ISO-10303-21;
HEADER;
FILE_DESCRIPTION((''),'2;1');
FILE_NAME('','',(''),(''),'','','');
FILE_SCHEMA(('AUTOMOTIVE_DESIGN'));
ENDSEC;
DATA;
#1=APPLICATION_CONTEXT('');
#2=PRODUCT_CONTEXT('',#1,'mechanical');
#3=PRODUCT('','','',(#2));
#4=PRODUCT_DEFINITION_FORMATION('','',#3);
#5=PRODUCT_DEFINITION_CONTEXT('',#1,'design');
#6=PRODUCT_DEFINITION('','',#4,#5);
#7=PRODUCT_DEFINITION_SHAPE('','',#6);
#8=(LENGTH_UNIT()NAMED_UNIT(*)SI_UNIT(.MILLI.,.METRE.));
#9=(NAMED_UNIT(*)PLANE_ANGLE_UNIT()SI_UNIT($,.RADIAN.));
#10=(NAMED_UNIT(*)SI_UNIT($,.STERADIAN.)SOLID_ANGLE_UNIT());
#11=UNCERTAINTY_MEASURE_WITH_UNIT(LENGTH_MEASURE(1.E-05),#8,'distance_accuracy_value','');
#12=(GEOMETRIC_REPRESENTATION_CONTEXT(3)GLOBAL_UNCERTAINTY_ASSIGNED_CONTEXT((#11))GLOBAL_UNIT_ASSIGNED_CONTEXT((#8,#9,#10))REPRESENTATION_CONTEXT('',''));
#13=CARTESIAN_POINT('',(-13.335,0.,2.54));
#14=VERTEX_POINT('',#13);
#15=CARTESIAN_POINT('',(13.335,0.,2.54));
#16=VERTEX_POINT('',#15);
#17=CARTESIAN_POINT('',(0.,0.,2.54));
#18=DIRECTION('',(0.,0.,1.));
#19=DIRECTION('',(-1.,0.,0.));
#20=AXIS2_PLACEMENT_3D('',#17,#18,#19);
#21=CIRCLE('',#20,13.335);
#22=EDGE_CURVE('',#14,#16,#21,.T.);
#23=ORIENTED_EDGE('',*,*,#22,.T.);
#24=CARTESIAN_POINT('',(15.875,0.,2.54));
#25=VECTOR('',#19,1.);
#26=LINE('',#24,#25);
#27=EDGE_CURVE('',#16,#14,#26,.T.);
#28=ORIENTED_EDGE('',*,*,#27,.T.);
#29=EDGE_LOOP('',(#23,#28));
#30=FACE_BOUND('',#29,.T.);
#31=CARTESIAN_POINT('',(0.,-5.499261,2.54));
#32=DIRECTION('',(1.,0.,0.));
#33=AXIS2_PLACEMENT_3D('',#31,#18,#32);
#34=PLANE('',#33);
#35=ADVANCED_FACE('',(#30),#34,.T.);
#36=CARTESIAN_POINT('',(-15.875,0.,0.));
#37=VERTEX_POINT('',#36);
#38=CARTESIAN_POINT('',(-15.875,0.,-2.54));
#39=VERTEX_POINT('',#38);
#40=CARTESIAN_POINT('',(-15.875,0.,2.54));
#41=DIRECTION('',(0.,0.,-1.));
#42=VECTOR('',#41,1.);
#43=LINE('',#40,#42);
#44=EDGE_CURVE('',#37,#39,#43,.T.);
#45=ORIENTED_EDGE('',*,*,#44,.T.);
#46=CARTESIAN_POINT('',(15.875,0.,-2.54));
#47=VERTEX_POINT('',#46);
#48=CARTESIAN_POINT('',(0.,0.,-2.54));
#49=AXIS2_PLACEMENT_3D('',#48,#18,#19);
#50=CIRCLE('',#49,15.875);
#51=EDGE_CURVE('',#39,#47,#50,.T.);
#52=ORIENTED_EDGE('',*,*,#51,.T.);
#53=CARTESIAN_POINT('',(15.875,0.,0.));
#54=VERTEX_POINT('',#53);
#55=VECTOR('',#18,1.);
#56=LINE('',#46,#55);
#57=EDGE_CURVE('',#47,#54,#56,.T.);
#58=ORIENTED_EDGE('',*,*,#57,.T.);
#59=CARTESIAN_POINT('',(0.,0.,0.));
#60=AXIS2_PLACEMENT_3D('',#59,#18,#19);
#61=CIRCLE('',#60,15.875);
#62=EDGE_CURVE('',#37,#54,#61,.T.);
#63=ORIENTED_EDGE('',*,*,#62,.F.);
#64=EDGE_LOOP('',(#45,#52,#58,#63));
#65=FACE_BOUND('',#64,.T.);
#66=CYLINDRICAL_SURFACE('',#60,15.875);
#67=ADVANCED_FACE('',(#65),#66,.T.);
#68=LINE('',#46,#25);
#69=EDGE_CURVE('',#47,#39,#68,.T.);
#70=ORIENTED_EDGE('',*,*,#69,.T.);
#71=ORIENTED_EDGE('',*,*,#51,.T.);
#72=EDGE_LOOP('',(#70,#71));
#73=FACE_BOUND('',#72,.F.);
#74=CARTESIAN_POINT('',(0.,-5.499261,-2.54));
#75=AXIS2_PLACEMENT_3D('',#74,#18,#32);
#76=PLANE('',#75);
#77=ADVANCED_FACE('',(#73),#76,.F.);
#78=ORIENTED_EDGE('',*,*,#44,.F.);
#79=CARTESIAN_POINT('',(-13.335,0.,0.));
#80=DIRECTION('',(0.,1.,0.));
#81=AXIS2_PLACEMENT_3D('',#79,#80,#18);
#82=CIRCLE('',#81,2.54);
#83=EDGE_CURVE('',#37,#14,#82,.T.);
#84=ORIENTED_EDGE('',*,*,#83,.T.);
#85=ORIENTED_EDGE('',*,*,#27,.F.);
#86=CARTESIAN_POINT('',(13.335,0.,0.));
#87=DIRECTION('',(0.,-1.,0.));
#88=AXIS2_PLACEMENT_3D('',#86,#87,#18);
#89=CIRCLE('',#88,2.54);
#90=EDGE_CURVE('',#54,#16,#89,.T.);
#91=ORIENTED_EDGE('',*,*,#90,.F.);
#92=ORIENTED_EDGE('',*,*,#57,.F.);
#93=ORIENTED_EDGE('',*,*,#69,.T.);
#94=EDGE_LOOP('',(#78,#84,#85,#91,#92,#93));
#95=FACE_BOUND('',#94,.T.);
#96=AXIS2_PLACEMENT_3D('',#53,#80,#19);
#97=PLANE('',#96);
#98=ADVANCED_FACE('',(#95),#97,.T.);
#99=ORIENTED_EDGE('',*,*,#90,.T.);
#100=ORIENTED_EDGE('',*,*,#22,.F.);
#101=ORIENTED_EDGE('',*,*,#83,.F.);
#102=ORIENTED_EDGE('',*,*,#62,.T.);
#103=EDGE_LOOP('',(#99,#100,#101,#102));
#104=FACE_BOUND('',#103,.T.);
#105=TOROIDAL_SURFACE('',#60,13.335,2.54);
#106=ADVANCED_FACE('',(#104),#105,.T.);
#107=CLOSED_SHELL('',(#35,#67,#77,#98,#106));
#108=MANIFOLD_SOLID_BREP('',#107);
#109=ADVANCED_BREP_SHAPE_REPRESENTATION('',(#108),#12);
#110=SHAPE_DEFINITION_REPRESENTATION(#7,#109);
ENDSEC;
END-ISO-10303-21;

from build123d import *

# Parameters (mm, degrees)
F1_DEPTH = 2.54
F5_R     = 2.54


# Not quite as in the source:
# - the program builds the solid bodies; features that only make, move or delete a surface that nothing else refers to are left out


with BuildPart() as f1:
    # F0 (on Top) → F1 (new body, symmetric)
    with BuildSketch(Plane.XY):
        with BuildLine():
            ThreePointArc((-15.875, 0), (0, -15.875), (15.875, 0))
            Line((15.875, 0), (-15.875, 0))
        make_face()
    extrude(amount=F1_DEPTH, both=True)

    # F5
    f5_edges = [f1.edges().sort_by_distance(p)[0] for p in [
        (0, -15.875, 2.54),
    ]]
    fillet(f5_edges, radius=F5_R)


solid = f1.part
